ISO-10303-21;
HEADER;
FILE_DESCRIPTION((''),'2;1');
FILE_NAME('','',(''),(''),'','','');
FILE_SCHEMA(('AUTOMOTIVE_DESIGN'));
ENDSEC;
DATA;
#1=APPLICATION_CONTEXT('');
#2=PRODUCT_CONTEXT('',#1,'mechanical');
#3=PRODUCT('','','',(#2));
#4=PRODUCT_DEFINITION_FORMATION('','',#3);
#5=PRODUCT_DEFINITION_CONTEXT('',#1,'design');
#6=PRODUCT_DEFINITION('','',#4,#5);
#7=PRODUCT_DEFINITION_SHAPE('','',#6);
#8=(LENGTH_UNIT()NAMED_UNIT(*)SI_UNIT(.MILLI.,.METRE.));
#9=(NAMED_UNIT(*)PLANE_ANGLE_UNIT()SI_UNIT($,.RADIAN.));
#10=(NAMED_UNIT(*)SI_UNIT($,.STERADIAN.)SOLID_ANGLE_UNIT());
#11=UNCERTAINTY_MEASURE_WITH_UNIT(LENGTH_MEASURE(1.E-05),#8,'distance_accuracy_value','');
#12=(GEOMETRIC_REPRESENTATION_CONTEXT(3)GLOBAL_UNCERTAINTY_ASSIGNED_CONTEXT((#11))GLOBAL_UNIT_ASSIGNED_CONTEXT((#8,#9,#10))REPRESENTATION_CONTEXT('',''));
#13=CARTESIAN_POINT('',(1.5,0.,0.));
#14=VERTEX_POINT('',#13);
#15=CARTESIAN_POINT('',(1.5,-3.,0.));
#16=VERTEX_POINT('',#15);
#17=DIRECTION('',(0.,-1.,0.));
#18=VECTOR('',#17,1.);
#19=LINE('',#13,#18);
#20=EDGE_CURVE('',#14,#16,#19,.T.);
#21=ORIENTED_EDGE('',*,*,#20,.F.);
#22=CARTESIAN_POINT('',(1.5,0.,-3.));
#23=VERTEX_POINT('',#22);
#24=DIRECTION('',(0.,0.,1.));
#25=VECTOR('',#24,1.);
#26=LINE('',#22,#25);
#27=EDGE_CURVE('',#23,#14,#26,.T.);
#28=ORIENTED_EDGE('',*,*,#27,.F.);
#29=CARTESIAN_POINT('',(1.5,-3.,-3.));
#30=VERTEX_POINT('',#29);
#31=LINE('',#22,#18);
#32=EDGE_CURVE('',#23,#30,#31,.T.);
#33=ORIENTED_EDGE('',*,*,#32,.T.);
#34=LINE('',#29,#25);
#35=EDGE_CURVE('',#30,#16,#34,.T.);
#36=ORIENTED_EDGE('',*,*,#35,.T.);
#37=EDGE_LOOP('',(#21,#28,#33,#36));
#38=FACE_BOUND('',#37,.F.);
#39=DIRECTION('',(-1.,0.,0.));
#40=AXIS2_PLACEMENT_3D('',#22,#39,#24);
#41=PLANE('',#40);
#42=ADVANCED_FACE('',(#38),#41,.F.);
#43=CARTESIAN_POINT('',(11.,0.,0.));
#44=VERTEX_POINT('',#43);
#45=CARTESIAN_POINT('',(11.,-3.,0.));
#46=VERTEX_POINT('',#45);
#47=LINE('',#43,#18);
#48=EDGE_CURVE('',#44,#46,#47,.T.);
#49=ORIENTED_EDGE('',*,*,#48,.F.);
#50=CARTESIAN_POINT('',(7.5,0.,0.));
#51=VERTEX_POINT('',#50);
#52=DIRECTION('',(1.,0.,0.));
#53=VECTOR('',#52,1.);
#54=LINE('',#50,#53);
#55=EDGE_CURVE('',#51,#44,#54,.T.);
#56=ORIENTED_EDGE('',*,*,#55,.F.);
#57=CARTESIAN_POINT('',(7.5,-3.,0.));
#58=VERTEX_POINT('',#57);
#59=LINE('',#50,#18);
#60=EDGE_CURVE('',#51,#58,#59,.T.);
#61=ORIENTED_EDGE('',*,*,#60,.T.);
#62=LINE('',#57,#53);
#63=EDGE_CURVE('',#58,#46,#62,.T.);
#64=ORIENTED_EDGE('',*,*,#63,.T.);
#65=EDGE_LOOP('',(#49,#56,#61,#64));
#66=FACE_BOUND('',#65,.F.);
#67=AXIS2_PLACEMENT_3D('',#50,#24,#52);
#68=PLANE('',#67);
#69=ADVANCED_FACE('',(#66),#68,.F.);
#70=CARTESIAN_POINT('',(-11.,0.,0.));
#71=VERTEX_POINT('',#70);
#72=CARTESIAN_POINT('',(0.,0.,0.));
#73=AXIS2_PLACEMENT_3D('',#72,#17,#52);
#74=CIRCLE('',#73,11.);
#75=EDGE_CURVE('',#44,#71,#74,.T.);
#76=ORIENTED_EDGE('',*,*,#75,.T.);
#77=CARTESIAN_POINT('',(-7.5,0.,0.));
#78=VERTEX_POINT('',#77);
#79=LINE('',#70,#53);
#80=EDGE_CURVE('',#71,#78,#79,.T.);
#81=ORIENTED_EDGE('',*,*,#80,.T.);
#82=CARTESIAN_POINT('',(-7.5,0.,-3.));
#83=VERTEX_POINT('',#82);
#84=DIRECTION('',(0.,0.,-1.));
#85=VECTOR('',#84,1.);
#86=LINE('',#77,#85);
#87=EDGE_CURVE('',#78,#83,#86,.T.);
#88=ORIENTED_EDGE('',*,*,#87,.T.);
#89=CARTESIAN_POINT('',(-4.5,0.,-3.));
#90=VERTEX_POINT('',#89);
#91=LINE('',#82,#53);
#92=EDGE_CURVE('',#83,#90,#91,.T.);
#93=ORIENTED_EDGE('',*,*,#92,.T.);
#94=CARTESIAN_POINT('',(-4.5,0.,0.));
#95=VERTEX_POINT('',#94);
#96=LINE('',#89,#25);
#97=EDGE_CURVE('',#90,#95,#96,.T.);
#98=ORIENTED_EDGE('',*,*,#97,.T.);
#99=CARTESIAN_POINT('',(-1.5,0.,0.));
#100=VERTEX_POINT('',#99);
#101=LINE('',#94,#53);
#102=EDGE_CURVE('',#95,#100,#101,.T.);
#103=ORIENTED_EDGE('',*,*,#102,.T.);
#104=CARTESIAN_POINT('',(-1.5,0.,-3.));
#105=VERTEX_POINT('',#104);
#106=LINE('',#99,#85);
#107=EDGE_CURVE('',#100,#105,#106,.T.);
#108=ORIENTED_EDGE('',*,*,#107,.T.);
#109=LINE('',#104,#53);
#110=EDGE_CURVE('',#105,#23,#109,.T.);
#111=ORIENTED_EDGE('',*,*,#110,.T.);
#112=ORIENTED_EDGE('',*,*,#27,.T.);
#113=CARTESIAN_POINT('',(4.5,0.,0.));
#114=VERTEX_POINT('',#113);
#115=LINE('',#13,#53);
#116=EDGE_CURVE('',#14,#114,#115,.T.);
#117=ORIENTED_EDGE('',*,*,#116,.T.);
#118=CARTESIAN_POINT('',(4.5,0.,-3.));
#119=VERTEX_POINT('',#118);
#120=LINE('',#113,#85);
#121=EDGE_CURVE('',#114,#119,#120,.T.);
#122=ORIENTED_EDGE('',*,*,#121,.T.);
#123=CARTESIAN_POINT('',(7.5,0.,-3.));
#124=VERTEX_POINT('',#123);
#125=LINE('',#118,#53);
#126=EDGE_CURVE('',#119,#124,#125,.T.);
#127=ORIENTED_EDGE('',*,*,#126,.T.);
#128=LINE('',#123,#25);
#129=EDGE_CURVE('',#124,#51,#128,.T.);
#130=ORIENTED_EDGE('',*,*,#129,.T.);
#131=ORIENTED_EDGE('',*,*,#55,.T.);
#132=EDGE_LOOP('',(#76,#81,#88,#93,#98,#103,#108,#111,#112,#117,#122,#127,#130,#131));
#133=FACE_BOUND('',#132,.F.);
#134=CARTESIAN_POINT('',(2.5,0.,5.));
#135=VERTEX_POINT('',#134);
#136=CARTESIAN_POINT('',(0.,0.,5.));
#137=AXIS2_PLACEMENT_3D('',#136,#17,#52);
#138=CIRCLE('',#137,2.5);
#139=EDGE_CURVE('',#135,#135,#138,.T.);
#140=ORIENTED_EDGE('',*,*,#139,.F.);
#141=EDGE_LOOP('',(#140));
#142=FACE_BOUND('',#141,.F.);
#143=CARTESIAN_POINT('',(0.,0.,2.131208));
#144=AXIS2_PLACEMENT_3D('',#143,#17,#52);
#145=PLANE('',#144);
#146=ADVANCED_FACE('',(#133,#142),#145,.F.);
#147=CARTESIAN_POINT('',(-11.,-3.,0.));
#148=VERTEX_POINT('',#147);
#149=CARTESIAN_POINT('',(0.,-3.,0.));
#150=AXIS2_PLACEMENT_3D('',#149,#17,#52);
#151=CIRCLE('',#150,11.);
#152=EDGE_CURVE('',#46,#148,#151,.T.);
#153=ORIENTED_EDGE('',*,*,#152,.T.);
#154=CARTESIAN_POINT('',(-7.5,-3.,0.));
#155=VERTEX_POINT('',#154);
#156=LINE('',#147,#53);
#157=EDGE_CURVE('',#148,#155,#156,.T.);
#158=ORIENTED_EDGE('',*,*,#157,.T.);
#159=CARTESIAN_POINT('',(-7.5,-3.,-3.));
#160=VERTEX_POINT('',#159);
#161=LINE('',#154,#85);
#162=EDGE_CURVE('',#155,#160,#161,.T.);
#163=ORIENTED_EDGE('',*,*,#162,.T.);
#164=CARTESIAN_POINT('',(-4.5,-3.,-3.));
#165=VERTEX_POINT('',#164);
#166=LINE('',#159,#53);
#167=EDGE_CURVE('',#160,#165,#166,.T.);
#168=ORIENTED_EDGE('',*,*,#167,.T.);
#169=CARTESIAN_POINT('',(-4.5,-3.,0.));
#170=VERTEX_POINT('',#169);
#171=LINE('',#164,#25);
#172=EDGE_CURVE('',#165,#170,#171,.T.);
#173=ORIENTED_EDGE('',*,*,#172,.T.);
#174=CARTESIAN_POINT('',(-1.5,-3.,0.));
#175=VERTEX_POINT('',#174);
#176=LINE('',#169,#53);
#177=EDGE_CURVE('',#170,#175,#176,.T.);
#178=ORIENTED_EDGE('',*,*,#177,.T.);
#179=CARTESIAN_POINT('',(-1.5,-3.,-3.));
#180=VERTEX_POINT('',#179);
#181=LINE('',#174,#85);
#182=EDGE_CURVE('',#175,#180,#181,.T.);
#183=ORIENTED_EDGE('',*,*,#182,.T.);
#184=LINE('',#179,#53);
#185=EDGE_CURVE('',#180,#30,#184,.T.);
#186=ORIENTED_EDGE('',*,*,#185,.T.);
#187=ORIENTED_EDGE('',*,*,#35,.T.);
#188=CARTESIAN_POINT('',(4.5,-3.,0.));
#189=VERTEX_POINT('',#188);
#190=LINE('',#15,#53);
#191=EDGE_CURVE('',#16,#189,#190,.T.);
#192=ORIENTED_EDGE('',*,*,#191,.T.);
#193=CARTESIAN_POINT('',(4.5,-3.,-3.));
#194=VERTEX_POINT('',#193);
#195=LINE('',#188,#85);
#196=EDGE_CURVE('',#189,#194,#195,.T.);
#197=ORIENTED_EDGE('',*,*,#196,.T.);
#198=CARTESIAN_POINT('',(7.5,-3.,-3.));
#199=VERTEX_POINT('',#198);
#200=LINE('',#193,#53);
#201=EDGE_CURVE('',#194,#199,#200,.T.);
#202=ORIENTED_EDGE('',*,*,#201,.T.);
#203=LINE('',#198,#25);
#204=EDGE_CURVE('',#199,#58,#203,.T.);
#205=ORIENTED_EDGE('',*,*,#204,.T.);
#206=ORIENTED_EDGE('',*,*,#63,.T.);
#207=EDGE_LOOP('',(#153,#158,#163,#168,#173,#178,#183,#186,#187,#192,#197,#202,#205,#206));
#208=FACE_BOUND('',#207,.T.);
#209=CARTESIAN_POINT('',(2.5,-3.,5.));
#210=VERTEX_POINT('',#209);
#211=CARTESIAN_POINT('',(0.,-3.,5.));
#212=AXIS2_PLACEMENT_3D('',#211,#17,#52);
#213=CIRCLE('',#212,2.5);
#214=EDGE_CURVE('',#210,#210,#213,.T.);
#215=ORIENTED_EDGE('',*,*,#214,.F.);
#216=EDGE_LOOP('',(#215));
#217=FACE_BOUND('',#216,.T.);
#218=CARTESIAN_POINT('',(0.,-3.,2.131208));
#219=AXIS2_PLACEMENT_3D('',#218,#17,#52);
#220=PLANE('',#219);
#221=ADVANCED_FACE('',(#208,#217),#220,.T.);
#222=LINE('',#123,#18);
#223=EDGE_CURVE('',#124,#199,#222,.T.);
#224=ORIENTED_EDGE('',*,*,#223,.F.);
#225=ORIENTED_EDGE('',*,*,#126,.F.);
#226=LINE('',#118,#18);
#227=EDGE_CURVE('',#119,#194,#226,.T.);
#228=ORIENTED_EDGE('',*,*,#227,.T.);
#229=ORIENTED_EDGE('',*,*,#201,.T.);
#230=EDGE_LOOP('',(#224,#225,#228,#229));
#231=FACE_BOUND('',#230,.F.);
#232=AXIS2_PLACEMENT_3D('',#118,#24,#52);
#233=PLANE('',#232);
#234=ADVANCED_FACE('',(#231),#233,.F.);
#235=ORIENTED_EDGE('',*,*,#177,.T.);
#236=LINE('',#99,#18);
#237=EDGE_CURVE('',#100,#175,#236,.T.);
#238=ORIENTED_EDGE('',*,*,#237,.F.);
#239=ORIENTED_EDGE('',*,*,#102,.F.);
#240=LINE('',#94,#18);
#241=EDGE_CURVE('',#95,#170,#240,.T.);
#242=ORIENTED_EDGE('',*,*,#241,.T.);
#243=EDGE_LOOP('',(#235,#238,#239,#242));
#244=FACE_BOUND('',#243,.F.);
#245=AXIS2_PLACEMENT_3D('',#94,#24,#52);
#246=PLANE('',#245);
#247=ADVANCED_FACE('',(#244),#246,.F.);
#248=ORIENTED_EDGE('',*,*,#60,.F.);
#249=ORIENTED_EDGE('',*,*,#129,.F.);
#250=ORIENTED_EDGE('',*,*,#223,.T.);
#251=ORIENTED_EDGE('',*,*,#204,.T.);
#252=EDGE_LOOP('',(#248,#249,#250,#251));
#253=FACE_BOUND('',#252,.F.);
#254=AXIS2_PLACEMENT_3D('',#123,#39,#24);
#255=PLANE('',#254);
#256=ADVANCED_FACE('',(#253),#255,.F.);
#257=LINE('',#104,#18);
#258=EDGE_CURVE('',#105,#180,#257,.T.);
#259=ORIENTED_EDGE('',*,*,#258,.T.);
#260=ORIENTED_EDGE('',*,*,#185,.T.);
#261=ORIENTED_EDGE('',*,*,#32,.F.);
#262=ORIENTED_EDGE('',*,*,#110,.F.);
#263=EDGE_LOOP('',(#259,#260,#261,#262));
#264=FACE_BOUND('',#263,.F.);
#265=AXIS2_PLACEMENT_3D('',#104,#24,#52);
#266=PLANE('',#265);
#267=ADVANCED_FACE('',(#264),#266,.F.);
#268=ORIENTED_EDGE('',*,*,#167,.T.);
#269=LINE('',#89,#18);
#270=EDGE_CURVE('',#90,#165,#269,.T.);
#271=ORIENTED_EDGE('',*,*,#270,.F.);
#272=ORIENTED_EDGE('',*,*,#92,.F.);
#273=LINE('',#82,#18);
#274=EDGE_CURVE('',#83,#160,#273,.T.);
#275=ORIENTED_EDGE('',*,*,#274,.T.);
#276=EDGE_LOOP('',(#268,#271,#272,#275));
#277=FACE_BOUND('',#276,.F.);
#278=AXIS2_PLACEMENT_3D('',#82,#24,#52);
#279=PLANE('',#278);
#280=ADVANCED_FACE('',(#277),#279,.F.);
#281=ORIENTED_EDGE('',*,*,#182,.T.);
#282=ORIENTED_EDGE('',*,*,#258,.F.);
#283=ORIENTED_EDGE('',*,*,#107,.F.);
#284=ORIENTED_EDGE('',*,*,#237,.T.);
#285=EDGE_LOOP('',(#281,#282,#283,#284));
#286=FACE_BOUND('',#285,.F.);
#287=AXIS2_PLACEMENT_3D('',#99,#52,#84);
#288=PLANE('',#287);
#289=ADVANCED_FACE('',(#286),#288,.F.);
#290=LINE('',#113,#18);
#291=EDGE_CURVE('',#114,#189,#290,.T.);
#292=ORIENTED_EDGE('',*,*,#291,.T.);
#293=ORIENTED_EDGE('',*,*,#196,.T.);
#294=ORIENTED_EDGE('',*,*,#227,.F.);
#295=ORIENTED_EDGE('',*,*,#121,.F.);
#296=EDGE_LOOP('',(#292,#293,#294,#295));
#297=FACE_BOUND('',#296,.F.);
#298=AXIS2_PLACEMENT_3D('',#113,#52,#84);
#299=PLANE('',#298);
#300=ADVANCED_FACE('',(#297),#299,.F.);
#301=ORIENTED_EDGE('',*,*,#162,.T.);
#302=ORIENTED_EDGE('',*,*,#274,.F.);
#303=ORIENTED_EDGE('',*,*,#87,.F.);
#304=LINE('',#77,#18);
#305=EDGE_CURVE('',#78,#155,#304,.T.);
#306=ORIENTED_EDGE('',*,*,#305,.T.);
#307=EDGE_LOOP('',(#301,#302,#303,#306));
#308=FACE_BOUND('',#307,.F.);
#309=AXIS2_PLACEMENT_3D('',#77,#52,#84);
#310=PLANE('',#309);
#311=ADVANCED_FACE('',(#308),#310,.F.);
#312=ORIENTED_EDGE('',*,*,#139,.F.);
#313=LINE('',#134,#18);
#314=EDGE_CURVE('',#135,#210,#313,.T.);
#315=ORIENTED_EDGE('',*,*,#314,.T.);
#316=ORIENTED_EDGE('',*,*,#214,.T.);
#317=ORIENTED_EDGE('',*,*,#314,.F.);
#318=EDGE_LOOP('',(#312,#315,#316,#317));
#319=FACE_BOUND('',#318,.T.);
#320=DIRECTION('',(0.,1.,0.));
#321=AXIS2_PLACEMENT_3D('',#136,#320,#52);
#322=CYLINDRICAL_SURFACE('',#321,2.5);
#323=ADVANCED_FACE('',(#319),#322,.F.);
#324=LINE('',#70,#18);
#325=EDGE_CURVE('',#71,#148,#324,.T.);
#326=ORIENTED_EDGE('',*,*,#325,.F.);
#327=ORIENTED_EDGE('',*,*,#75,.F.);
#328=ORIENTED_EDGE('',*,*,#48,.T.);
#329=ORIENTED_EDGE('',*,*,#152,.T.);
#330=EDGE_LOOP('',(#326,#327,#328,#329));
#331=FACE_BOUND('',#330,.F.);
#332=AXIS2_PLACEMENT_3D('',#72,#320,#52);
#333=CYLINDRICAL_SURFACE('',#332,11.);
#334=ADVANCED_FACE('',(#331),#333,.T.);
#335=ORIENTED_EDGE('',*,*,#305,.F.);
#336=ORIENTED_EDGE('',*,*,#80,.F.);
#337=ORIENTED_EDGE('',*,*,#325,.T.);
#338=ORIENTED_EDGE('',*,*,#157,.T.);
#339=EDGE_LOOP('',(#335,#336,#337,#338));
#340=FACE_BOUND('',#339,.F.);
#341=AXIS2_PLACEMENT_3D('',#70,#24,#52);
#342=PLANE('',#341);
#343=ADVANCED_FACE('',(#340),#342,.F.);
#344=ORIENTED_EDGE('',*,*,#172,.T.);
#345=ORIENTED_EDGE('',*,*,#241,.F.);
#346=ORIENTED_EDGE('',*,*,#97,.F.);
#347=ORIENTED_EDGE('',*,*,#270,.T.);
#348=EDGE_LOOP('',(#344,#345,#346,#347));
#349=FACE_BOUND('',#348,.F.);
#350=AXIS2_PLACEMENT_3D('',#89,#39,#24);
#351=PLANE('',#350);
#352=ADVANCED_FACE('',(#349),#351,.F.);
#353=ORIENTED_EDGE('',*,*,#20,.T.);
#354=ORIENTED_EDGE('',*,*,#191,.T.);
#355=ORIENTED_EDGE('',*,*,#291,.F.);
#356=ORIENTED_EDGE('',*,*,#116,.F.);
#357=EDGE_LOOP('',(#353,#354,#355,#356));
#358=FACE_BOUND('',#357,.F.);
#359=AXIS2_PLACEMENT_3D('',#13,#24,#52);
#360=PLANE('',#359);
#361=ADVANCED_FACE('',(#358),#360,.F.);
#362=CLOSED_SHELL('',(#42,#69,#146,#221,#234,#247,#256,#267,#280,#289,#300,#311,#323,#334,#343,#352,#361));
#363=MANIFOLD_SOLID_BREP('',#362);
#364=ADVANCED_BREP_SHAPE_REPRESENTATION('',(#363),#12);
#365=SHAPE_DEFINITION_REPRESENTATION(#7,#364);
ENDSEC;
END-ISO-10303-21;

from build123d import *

# Parameters (mm, degrees)
F0_R     = 2.5
F1_DEPTH = 3


# Not quite as in the source:
# - a feature names something its author has since deleted; it is built from what else it names


with BuildPart() as f1:
    # F0 (on Front) → F1 (new body)
    with BuildSketch(Plane.XZ):
        with BuildLine():
            Line((7.5, 0), (11, 0))
            ThreePointArc((11, 0), (0, 11), (-11, 0))
            Line((-11, 0), (-7.5, 0))
            Line((-7.5, 0), (-7.5, -3))
            Line((-7.5, -3), (-4.5, -3))
            Line((-4.5, -3), (-4.5, 0))
            Line((-4.5, 0), (-1.5, 0))
            Line((-1.5, 0), (-1.5, -3))
            Line((-1.5, -3), (1.5, -3))
            Line((1.5, -3), (1.5, 0))
            Line((1.5, 0), (4.5, 0))
            Line((4.5, 0), (4.5, -3))
            Line((4.5, -3), (7.5, -3))
            Line((7.5, -3), (7.5, 0))
        make_face()
        with Locations((0, 5)):
            Circle(F0_R, mode=Mode.SUBTRACT)
    extrude(amount=F1_DEPTH)


solid = f1.part
